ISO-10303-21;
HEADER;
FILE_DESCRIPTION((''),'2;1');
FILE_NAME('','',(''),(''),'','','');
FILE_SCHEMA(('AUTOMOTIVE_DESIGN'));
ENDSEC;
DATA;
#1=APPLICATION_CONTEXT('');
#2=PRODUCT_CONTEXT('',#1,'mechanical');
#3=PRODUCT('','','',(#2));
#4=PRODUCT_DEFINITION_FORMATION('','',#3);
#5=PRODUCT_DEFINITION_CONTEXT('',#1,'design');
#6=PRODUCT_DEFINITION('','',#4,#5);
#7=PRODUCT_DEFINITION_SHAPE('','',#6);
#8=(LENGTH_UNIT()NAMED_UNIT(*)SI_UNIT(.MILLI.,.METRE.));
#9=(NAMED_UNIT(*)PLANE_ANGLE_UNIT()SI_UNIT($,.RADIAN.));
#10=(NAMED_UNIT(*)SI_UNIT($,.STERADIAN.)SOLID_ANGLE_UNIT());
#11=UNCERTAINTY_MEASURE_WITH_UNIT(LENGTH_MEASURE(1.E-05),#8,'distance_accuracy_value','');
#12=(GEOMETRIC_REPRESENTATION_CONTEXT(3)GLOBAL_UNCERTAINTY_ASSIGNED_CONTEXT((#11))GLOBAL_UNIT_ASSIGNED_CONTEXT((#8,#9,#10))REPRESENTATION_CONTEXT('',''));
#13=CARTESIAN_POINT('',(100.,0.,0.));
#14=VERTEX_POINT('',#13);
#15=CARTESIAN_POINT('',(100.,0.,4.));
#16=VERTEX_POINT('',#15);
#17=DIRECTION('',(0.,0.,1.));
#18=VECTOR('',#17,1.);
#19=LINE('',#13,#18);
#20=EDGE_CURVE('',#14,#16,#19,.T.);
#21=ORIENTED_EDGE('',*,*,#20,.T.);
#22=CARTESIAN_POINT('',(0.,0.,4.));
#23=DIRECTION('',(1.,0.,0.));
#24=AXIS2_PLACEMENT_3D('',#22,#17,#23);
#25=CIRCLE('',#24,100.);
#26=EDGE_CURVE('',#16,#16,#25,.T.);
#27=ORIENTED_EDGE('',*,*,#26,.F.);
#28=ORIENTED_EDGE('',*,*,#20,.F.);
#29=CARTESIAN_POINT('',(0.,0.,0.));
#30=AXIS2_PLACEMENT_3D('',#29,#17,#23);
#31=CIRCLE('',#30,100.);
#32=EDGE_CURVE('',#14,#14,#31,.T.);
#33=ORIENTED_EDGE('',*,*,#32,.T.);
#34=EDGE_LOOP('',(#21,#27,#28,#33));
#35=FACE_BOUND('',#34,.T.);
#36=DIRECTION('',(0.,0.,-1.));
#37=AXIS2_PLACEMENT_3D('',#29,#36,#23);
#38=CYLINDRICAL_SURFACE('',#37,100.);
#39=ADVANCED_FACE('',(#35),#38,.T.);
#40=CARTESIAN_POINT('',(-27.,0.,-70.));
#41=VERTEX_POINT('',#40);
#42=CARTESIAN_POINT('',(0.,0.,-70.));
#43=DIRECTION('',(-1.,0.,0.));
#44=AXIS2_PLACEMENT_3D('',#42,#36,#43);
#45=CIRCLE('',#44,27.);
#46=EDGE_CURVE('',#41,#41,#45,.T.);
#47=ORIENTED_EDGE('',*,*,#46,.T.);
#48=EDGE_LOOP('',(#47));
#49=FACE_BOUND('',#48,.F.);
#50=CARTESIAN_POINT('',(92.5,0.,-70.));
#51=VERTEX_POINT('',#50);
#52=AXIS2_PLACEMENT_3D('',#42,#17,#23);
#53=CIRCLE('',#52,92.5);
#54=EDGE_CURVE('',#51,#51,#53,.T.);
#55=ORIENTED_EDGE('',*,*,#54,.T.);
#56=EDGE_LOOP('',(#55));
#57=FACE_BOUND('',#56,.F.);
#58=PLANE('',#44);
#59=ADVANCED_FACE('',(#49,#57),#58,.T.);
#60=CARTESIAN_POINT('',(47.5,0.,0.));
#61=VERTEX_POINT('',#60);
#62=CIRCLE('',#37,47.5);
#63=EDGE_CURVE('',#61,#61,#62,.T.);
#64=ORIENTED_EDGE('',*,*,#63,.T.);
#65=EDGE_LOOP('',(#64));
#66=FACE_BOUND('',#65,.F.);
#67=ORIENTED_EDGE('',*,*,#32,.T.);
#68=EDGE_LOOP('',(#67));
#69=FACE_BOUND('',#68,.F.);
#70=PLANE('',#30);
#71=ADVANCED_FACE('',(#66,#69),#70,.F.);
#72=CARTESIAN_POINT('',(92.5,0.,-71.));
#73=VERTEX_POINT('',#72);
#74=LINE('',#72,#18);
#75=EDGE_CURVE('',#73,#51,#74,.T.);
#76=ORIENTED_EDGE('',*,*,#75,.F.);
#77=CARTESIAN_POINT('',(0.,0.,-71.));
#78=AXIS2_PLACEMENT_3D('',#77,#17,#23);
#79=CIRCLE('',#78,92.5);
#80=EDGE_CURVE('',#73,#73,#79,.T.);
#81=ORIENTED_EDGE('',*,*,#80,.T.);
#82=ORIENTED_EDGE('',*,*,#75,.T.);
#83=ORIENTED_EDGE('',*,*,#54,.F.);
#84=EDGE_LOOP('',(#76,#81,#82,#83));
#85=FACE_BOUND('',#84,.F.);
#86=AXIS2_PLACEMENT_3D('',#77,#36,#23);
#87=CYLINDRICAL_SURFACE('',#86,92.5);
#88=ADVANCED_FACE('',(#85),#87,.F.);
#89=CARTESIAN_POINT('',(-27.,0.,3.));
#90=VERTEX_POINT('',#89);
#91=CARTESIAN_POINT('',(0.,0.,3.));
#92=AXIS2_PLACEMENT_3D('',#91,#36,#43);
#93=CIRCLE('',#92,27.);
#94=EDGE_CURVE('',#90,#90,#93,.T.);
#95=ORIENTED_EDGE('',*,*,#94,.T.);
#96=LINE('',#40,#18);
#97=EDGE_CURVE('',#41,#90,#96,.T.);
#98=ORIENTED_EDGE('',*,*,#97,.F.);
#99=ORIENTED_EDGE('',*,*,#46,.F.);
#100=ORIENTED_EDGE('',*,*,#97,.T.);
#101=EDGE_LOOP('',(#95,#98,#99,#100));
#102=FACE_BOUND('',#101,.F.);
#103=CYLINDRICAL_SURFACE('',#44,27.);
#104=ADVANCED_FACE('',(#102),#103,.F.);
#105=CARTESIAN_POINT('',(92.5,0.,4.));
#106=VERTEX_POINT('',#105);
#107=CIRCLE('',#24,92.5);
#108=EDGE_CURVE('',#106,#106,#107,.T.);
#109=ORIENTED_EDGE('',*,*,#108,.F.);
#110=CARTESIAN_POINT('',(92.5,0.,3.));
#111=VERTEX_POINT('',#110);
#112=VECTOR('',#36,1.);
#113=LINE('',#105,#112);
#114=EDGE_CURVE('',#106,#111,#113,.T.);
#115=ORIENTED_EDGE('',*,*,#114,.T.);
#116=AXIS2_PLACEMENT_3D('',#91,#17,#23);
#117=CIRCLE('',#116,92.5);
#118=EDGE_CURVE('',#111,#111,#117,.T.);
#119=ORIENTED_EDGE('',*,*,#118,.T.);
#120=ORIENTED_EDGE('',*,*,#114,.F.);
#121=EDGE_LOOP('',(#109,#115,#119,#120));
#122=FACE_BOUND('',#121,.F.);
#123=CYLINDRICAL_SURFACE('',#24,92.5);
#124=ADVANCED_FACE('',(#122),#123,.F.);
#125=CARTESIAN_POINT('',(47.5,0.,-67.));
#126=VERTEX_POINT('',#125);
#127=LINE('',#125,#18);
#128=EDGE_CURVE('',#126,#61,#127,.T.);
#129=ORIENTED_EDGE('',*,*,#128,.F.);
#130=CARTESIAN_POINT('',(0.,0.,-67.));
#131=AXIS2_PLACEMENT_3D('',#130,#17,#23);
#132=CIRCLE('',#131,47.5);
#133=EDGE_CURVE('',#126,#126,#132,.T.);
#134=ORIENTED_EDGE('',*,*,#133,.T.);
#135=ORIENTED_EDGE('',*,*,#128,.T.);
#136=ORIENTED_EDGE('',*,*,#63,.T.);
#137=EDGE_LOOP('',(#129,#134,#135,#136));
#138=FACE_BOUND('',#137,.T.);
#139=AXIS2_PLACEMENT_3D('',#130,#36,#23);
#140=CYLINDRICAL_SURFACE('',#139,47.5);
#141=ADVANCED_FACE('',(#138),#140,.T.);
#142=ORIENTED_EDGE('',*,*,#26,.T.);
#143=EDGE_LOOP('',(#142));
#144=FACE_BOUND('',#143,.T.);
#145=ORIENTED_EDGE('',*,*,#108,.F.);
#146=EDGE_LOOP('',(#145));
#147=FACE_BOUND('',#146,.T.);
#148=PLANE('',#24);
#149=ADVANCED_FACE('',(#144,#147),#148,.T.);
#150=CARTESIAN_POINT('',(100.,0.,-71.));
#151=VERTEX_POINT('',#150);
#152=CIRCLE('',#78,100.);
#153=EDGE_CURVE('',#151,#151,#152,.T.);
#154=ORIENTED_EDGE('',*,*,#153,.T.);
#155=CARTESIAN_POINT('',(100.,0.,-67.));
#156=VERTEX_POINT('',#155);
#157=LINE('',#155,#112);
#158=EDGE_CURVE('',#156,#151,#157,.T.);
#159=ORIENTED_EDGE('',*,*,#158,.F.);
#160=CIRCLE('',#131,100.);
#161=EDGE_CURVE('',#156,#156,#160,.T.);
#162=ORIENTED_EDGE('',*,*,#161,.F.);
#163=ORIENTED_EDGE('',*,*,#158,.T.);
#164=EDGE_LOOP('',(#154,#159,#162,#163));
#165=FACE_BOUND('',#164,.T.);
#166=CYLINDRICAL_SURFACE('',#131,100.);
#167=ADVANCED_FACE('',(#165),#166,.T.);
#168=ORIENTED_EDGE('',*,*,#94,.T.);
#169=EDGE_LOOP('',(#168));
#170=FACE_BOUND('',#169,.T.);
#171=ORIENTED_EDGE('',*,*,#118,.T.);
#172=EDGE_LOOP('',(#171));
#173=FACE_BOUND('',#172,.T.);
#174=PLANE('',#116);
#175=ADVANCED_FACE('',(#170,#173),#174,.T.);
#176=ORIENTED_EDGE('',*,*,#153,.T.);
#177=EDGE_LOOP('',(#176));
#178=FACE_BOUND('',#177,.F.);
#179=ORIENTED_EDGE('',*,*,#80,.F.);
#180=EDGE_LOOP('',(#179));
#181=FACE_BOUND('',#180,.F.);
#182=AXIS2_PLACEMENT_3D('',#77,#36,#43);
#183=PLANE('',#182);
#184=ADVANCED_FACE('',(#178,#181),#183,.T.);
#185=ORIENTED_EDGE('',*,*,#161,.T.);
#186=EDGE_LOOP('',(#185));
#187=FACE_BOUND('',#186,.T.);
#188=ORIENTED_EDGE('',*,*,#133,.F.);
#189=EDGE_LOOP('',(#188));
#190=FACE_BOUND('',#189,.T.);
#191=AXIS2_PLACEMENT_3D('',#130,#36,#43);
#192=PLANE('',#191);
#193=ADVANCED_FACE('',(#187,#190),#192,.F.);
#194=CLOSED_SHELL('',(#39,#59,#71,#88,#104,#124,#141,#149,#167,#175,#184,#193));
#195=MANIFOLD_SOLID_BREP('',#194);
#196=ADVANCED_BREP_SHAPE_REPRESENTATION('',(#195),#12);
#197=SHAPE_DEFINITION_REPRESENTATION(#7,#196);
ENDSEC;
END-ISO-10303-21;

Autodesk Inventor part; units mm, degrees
ref_plane "YZ Plane" through (0, 0, 0) normal (1, 0, 0) x (0, 1, 0)
ref_plane "XZ Plane" through (0, 0, 0) normal (0, 1, 0) x (-1, 0, 0)
sketch "Sketch11" plane through (0, 0, 0) normal (0, 0, 1) x (1, 0, 0)
  circle A0 centre (0, 0) radius 100
  dimension "d39" = 200
extrude "Extrusion10" add sketch "Sketch11" along normal blind 4
sketch "Sketch12" plane through (0, 0, 4) normal (0, 0, 1) x (1, 0, 0)
  circle A0 centre (0, 0) radius 100 projected
  circle A1 centre (0, 0) radius 92.5
  dimension "d42" = 185
extrude "Extrusion11" cut sketch "Sketch12" against normal blind 1 contours A1
ref_plane "Work Plane1" through (0, 0, -33.5) normal (0, 0, -1) x (-1, 0, 0)
mirror "Mirror1" about plane through (0, 0, -33.5) normal (0, 0, -1)
sketch "Sketch14" plane through (0, 0, -67) normal (0, 0, 1) x (1, 0, 0)
  circle A0 centre (0, 0) radius 100 projected
  circle A1 centre (0, 0) radius 47.5
  dimension "d46" = 95
extrude "Extrusion12" add sketch "Sketch14" along normal up to next contours A1
sketch "Sketch15" plane through (0, 0, -70) normal (0, 0, -1) x (-1, 0, 0)
  circle A0 centre (0, 0) radius 92.5 projected
  circle A1 centre (0, 0) radius 27
  dimension "d50" = 54
extrude "Extrusion13" cut sketch "Sketch15" against normal up to surface (73 mm away) contours A1
properties part number "SpoolFilament" material "ABS Plastic"
